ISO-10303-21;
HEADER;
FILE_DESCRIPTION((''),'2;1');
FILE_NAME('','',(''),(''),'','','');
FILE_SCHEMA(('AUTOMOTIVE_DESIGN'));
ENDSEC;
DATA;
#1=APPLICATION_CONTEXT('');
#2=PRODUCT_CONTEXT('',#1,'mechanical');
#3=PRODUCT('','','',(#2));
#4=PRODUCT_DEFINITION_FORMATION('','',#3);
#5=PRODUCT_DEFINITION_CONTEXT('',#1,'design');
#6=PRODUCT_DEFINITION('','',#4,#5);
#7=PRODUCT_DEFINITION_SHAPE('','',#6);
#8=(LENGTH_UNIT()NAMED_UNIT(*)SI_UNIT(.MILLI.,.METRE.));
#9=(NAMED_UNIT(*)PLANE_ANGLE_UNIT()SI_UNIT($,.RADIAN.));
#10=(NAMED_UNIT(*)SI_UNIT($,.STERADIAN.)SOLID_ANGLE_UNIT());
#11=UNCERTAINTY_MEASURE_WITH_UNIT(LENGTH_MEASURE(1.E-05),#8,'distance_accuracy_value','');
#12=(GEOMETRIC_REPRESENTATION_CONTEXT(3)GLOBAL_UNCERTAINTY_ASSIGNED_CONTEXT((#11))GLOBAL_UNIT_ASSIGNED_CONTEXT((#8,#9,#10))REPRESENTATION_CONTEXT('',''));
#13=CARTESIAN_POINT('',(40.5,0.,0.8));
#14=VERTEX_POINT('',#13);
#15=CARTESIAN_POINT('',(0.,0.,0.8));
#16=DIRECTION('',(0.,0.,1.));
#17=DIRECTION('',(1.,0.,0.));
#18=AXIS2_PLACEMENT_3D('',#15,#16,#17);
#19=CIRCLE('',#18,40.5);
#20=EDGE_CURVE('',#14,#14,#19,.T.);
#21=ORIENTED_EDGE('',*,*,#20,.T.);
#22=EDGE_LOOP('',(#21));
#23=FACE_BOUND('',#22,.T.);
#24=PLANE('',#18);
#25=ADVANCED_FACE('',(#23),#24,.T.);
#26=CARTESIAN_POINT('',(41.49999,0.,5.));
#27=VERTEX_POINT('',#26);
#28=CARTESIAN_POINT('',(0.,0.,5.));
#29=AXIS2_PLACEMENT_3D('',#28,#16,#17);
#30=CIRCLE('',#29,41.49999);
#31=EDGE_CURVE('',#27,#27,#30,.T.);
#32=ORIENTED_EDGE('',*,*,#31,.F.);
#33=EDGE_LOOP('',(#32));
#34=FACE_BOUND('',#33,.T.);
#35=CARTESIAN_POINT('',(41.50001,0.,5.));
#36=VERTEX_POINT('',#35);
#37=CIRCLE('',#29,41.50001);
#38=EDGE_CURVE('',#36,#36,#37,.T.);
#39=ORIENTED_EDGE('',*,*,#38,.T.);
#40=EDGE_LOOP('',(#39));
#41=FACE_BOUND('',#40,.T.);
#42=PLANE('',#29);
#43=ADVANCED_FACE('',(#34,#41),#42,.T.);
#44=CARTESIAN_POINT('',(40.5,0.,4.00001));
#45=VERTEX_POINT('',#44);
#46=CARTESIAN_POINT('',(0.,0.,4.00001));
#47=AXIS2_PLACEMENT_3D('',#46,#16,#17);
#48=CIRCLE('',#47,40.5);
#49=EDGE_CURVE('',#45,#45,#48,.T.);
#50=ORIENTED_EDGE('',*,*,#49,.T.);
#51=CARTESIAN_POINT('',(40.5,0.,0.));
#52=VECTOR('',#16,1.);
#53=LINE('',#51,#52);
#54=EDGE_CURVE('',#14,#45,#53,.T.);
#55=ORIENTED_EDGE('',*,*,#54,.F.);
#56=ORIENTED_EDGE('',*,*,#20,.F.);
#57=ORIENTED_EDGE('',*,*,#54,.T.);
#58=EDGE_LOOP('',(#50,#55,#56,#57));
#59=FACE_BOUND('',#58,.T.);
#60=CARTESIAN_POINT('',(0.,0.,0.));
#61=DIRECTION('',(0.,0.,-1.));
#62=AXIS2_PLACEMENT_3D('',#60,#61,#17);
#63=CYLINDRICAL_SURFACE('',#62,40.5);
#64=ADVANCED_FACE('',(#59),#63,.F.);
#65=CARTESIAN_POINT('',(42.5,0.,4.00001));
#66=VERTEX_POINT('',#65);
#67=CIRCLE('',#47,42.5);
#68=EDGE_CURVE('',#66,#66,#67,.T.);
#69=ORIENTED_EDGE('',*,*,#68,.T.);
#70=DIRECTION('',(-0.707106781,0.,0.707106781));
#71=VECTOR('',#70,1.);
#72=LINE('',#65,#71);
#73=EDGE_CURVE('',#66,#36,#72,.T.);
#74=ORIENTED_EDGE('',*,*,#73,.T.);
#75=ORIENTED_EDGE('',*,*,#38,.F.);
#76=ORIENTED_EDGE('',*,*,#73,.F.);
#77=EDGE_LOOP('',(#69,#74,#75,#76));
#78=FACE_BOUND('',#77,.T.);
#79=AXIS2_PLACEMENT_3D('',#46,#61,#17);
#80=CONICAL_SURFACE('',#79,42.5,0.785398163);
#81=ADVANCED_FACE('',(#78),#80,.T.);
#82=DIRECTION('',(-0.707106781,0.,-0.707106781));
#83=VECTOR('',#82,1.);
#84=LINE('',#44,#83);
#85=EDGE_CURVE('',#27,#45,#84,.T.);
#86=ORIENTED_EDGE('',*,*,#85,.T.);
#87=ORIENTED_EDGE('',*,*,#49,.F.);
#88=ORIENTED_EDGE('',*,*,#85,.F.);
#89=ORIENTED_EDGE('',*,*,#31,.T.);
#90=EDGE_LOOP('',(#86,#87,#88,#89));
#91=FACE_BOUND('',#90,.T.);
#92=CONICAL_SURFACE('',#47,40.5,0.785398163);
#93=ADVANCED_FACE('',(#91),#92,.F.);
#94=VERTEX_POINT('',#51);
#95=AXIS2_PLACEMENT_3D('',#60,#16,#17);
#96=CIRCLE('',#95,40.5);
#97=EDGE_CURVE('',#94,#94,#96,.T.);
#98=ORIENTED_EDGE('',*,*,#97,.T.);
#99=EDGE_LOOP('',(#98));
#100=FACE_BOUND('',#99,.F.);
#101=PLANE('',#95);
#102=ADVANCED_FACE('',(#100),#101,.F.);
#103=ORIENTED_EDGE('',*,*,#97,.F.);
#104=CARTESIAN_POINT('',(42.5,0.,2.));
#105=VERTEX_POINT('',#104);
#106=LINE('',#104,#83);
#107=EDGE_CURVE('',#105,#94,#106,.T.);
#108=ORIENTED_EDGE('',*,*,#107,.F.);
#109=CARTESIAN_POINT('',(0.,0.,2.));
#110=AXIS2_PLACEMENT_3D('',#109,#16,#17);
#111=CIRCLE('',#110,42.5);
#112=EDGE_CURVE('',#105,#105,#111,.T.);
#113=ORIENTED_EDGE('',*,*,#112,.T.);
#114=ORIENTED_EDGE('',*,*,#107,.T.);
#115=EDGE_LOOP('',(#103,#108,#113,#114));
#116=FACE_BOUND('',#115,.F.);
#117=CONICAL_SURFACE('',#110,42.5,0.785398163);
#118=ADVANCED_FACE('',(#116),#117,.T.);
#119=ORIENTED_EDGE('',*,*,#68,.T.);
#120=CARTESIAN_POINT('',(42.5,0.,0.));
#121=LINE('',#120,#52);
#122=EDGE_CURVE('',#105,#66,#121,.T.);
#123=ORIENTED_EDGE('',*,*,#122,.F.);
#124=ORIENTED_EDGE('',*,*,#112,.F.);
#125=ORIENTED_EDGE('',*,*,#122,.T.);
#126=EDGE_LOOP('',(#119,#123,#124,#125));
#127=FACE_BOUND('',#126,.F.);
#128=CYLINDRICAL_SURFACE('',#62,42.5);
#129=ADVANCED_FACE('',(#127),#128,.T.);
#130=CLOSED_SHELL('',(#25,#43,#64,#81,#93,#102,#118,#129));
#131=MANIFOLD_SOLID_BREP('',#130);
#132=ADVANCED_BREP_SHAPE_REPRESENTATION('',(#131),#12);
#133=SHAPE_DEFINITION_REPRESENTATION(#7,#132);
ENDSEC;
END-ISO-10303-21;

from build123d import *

# Parameters (mm, degrees)
F0_R     = 40.5
F1_DEPTH = 0.8
F0_R_2   = 42.5
F2_DEPTH = 5
F3_SIZE  = 2
F4_SIZE  = 0.99999


# Not quite as in the source:
# - a fillet or chamfer is up to 0.001 mm smaller than in the source, because OpenCascade refuses the exact size


with BuildPart() as f1:
    # F0 (on Top) → F1 (new body)
    with BuildSketch(Plane.XY):
        Circle(F0_R)
    extrude(amount=F1_DEPTH)

    # F0 (on Top) → F2 (join)
    with BuildSketch(Plane.XY):
        Circle(F0_R_2)
        Circle(F0_R, mode=Mode.SUBTRACT)
    extrude(amount=F2_DEPTH)

    # F3
    f3_edges = [f1.edges().sort_by_distance(p)[0] for p in [
        (-42.5, 0, 0),
    ]]
    chamfer(f3_edges, length=F3_SIZE)

    # F4 (size 1 in the source; OpenCascade refuses exactly that, so slightly less here)
    f4_edges = [f1.edges().sort_by_distance(p)[0] for p in [
        (-40.5, 0, 5),
        (-42.5, 0, 5),
    ]]
    chamfer(f4_edges, length=F4_SIZE)


solid = f1.part
